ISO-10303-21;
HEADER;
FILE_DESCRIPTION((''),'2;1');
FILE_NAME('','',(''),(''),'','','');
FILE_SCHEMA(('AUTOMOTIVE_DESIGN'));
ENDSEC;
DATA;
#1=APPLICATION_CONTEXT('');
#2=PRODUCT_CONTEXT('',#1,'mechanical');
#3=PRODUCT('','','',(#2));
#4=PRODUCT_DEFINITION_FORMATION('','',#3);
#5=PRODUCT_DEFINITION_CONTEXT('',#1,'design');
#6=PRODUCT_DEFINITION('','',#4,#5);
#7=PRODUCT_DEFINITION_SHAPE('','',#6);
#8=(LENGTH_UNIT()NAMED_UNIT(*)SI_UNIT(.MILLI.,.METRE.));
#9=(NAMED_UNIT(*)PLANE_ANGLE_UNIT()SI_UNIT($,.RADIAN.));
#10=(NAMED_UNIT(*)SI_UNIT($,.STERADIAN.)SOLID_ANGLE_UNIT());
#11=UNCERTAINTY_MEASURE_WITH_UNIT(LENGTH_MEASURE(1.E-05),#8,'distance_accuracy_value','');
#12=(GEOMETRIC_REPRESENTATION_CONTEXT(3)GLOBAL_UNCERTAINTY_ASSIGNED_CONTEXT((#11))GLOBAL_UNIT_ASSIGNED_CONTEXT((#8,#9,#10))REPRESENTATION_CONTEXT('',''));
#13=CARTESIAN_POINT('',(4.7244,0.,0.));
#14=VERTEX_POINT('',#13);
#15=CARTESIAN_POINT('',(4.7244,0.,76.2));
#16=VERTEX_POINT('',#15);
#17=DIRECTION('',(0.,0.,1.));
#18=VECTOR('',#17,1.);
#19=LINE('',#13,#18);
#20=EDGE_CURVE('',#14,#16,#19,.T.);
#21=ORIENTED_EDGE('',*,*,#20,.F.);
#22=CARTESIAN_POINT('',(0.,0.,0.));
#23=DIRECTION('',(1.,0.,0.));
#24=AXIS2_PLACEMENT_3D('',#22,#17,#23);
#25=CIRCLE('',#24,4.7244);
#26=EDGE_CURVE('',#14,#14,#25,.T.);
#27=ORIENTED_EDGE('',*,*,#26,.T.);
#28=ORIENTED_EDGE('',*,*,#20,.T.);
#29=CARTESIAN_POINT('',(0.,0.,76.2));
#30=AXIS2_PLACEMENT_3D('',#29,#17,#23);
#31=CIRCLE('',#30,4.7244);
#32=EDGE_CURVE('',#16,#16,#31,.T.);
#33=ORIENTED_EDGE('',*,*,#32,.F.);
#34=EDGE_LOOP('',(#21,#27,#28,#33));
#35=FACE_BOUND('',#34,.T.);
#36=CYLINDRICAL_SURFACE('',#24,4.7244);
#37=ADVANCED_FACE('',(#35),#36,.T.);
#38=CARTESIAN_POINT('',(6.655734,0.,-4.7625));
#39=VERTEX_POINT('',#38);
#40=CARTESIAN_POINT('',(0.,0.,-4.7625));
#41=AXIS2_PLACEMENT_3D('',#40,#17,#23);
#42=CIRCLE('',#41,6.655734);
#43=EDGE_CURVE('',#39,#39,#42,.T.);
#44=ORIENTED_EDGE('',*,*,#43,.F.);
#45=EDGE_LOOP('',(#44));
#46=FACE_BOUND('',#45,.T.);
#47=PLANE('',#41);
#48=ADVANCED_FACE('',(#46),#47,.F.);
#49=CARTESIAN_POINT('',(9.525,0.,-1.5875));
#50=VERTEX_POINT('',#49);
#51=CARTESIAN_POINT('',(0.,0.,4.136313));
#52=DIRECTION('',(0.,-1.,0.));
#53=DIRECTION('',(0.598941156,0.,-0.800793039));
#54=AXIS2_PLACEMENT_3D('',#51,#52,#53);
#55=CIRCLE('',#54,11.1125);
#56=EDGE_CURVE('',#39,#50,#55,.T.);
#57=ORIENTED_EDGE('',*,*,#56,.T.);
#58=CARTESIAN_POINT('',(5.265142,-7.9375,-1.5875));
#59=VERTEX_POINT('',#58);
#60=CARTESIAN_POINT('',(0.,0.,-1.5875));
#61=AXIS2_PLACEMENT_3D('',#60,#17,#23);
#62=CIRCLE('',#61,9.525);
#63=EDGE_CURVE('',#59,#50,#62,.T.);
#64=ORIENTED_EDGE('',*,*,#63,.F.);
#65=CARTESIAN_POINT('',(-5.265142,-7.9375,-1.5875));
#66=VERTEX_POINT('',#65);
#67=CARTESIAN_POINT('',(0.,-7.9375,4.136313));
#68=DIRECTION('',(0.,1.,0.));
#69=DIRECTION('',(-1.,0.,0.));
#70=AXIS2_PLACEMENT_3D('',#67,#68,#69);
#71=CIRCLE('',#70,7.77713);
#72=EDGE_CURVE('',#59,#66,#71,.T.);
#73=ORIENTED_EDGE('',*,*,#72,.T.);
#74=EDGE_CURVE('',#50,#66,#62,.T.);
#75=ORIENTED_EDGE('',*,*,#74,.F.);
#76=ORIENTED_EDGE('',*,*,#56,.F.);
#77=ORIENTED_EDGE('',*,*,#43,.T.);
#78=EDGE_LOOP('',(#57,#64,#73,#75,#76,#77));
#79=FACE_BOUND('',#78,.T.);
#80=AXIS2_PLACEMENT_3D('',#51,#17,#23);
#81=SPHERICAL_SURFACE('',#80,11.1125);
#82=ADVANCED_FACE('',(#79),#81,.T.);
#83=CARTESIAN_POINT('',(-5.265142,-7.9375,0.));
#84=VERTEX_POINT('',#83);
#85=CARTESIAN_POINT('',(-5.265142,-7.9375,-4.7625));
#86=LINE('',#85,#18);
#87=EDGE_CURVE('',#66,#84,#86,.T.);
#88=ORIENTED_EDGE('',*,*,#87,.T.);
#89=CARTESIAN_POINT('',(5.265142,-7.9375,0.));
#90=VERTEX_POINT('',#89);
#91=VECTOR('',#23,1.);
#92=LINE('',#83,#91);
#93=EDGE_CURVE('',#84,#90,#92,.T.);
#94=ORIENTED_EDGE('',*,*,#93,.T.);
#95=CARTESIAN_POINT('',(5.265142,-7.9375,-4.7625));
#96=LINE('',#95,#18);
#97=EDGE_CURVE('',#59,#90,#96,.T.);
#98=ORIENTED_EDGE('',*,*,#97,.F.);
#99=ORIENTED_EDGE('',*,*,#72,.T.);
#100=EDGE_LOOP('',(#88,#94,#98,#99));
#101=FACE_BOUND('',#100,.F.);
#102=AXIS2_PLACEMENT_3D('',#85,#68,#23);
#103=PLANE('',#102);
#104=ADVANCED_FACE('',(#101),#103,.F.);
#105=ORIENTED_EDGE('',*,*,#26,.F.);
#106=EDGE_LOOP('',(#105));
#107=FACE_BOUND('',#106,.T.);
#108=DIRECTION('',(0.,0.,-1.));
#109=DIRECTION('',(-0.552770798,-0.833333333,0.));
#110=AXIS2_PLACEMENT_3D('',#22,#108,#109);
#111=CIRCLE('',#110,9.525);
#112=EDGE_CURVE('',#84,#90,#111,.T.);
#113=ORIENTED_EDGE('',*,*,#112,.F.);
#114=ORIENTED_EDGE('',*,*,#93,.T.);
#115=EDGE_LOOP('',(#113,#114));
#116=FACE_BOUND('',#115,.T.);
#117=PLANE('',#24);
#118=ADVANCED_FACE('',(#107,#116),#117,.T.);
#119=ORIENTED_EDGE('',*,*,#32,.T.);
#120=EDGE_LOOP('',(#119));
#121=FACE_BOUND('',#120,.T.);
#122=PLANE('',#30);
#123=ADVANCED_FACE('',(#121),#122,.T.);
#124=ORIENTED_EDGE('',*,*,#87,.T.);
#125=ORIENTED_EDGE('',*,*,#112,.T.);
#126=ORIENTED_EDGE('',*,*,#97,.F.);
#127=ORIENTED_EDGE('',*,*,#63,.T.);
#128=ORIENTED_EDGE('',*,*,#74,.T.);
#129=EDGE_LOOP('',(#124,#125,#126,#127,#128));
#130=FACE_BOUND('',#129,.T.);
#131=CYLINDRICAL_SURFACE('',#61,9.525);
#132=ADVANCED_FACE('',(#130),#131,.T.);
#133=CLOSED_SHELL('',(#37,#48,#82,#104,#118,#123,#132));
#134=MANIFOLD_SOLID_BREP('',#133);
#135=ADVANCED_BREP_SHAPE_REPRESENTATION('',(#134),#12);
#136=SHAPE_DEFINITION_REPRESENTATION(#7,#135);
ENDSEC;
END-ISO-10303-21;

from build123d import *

# Parameters (mm, degrees)
F3_DEPTH = 4.7625


# Not quite as in the source:
# - a length typed as a fraction of an inch, garbled in the dataset ("3 / 203.2 mm" for 3/8 in), is restored


with BuildPart() as f1:
    # F0 (on Front) → F1 (revolve)
    with BuildSketch(Plane.XZ):
        with BuildLine():
            Line((0, 76.2), (0, 0))
            Line((0, 0), (0, -4.7625))
            Line((0, -4.7625), (6.655733594, -4.7625))
            ThreePointArc((6.655733594, -4.7625), (8.2446462119, -3.314423226), (9.525, -1.5875))
            Line((9.525, -1.5875), (9.525, 0))
            Line((9.525, 0), (4.7244, 0))
            Line((4.7244, 0), (4.7244, 76.2))
            Line((4.7244, 76.2), (0, 76.2))
        make_face()
    revolve(axis=Axis((0, 0, 38.1), (0, 0, 1)))

    # F2 (on face) → F3 (cut)
    with BuildSketch(Plane(origin=(0, 0, -4.7625), x_dir=(1, 0, 0), z_dir=(0, 0, -1))):
        with BuildLine():
            Line((0, 7.9375), (5.2651418547, 7.9375))
            ThreePointArc((5.2651418547, 7.9375), (0, 9.525), (-5.2651418547, 7.9375))
            Line((-5.2651418547, 7.9375), (0, 7.9375))
        make_face()
    extrude(amount=-F3_DEPTH, mode=Mode.SUBTRACT)


solid = f1.part
